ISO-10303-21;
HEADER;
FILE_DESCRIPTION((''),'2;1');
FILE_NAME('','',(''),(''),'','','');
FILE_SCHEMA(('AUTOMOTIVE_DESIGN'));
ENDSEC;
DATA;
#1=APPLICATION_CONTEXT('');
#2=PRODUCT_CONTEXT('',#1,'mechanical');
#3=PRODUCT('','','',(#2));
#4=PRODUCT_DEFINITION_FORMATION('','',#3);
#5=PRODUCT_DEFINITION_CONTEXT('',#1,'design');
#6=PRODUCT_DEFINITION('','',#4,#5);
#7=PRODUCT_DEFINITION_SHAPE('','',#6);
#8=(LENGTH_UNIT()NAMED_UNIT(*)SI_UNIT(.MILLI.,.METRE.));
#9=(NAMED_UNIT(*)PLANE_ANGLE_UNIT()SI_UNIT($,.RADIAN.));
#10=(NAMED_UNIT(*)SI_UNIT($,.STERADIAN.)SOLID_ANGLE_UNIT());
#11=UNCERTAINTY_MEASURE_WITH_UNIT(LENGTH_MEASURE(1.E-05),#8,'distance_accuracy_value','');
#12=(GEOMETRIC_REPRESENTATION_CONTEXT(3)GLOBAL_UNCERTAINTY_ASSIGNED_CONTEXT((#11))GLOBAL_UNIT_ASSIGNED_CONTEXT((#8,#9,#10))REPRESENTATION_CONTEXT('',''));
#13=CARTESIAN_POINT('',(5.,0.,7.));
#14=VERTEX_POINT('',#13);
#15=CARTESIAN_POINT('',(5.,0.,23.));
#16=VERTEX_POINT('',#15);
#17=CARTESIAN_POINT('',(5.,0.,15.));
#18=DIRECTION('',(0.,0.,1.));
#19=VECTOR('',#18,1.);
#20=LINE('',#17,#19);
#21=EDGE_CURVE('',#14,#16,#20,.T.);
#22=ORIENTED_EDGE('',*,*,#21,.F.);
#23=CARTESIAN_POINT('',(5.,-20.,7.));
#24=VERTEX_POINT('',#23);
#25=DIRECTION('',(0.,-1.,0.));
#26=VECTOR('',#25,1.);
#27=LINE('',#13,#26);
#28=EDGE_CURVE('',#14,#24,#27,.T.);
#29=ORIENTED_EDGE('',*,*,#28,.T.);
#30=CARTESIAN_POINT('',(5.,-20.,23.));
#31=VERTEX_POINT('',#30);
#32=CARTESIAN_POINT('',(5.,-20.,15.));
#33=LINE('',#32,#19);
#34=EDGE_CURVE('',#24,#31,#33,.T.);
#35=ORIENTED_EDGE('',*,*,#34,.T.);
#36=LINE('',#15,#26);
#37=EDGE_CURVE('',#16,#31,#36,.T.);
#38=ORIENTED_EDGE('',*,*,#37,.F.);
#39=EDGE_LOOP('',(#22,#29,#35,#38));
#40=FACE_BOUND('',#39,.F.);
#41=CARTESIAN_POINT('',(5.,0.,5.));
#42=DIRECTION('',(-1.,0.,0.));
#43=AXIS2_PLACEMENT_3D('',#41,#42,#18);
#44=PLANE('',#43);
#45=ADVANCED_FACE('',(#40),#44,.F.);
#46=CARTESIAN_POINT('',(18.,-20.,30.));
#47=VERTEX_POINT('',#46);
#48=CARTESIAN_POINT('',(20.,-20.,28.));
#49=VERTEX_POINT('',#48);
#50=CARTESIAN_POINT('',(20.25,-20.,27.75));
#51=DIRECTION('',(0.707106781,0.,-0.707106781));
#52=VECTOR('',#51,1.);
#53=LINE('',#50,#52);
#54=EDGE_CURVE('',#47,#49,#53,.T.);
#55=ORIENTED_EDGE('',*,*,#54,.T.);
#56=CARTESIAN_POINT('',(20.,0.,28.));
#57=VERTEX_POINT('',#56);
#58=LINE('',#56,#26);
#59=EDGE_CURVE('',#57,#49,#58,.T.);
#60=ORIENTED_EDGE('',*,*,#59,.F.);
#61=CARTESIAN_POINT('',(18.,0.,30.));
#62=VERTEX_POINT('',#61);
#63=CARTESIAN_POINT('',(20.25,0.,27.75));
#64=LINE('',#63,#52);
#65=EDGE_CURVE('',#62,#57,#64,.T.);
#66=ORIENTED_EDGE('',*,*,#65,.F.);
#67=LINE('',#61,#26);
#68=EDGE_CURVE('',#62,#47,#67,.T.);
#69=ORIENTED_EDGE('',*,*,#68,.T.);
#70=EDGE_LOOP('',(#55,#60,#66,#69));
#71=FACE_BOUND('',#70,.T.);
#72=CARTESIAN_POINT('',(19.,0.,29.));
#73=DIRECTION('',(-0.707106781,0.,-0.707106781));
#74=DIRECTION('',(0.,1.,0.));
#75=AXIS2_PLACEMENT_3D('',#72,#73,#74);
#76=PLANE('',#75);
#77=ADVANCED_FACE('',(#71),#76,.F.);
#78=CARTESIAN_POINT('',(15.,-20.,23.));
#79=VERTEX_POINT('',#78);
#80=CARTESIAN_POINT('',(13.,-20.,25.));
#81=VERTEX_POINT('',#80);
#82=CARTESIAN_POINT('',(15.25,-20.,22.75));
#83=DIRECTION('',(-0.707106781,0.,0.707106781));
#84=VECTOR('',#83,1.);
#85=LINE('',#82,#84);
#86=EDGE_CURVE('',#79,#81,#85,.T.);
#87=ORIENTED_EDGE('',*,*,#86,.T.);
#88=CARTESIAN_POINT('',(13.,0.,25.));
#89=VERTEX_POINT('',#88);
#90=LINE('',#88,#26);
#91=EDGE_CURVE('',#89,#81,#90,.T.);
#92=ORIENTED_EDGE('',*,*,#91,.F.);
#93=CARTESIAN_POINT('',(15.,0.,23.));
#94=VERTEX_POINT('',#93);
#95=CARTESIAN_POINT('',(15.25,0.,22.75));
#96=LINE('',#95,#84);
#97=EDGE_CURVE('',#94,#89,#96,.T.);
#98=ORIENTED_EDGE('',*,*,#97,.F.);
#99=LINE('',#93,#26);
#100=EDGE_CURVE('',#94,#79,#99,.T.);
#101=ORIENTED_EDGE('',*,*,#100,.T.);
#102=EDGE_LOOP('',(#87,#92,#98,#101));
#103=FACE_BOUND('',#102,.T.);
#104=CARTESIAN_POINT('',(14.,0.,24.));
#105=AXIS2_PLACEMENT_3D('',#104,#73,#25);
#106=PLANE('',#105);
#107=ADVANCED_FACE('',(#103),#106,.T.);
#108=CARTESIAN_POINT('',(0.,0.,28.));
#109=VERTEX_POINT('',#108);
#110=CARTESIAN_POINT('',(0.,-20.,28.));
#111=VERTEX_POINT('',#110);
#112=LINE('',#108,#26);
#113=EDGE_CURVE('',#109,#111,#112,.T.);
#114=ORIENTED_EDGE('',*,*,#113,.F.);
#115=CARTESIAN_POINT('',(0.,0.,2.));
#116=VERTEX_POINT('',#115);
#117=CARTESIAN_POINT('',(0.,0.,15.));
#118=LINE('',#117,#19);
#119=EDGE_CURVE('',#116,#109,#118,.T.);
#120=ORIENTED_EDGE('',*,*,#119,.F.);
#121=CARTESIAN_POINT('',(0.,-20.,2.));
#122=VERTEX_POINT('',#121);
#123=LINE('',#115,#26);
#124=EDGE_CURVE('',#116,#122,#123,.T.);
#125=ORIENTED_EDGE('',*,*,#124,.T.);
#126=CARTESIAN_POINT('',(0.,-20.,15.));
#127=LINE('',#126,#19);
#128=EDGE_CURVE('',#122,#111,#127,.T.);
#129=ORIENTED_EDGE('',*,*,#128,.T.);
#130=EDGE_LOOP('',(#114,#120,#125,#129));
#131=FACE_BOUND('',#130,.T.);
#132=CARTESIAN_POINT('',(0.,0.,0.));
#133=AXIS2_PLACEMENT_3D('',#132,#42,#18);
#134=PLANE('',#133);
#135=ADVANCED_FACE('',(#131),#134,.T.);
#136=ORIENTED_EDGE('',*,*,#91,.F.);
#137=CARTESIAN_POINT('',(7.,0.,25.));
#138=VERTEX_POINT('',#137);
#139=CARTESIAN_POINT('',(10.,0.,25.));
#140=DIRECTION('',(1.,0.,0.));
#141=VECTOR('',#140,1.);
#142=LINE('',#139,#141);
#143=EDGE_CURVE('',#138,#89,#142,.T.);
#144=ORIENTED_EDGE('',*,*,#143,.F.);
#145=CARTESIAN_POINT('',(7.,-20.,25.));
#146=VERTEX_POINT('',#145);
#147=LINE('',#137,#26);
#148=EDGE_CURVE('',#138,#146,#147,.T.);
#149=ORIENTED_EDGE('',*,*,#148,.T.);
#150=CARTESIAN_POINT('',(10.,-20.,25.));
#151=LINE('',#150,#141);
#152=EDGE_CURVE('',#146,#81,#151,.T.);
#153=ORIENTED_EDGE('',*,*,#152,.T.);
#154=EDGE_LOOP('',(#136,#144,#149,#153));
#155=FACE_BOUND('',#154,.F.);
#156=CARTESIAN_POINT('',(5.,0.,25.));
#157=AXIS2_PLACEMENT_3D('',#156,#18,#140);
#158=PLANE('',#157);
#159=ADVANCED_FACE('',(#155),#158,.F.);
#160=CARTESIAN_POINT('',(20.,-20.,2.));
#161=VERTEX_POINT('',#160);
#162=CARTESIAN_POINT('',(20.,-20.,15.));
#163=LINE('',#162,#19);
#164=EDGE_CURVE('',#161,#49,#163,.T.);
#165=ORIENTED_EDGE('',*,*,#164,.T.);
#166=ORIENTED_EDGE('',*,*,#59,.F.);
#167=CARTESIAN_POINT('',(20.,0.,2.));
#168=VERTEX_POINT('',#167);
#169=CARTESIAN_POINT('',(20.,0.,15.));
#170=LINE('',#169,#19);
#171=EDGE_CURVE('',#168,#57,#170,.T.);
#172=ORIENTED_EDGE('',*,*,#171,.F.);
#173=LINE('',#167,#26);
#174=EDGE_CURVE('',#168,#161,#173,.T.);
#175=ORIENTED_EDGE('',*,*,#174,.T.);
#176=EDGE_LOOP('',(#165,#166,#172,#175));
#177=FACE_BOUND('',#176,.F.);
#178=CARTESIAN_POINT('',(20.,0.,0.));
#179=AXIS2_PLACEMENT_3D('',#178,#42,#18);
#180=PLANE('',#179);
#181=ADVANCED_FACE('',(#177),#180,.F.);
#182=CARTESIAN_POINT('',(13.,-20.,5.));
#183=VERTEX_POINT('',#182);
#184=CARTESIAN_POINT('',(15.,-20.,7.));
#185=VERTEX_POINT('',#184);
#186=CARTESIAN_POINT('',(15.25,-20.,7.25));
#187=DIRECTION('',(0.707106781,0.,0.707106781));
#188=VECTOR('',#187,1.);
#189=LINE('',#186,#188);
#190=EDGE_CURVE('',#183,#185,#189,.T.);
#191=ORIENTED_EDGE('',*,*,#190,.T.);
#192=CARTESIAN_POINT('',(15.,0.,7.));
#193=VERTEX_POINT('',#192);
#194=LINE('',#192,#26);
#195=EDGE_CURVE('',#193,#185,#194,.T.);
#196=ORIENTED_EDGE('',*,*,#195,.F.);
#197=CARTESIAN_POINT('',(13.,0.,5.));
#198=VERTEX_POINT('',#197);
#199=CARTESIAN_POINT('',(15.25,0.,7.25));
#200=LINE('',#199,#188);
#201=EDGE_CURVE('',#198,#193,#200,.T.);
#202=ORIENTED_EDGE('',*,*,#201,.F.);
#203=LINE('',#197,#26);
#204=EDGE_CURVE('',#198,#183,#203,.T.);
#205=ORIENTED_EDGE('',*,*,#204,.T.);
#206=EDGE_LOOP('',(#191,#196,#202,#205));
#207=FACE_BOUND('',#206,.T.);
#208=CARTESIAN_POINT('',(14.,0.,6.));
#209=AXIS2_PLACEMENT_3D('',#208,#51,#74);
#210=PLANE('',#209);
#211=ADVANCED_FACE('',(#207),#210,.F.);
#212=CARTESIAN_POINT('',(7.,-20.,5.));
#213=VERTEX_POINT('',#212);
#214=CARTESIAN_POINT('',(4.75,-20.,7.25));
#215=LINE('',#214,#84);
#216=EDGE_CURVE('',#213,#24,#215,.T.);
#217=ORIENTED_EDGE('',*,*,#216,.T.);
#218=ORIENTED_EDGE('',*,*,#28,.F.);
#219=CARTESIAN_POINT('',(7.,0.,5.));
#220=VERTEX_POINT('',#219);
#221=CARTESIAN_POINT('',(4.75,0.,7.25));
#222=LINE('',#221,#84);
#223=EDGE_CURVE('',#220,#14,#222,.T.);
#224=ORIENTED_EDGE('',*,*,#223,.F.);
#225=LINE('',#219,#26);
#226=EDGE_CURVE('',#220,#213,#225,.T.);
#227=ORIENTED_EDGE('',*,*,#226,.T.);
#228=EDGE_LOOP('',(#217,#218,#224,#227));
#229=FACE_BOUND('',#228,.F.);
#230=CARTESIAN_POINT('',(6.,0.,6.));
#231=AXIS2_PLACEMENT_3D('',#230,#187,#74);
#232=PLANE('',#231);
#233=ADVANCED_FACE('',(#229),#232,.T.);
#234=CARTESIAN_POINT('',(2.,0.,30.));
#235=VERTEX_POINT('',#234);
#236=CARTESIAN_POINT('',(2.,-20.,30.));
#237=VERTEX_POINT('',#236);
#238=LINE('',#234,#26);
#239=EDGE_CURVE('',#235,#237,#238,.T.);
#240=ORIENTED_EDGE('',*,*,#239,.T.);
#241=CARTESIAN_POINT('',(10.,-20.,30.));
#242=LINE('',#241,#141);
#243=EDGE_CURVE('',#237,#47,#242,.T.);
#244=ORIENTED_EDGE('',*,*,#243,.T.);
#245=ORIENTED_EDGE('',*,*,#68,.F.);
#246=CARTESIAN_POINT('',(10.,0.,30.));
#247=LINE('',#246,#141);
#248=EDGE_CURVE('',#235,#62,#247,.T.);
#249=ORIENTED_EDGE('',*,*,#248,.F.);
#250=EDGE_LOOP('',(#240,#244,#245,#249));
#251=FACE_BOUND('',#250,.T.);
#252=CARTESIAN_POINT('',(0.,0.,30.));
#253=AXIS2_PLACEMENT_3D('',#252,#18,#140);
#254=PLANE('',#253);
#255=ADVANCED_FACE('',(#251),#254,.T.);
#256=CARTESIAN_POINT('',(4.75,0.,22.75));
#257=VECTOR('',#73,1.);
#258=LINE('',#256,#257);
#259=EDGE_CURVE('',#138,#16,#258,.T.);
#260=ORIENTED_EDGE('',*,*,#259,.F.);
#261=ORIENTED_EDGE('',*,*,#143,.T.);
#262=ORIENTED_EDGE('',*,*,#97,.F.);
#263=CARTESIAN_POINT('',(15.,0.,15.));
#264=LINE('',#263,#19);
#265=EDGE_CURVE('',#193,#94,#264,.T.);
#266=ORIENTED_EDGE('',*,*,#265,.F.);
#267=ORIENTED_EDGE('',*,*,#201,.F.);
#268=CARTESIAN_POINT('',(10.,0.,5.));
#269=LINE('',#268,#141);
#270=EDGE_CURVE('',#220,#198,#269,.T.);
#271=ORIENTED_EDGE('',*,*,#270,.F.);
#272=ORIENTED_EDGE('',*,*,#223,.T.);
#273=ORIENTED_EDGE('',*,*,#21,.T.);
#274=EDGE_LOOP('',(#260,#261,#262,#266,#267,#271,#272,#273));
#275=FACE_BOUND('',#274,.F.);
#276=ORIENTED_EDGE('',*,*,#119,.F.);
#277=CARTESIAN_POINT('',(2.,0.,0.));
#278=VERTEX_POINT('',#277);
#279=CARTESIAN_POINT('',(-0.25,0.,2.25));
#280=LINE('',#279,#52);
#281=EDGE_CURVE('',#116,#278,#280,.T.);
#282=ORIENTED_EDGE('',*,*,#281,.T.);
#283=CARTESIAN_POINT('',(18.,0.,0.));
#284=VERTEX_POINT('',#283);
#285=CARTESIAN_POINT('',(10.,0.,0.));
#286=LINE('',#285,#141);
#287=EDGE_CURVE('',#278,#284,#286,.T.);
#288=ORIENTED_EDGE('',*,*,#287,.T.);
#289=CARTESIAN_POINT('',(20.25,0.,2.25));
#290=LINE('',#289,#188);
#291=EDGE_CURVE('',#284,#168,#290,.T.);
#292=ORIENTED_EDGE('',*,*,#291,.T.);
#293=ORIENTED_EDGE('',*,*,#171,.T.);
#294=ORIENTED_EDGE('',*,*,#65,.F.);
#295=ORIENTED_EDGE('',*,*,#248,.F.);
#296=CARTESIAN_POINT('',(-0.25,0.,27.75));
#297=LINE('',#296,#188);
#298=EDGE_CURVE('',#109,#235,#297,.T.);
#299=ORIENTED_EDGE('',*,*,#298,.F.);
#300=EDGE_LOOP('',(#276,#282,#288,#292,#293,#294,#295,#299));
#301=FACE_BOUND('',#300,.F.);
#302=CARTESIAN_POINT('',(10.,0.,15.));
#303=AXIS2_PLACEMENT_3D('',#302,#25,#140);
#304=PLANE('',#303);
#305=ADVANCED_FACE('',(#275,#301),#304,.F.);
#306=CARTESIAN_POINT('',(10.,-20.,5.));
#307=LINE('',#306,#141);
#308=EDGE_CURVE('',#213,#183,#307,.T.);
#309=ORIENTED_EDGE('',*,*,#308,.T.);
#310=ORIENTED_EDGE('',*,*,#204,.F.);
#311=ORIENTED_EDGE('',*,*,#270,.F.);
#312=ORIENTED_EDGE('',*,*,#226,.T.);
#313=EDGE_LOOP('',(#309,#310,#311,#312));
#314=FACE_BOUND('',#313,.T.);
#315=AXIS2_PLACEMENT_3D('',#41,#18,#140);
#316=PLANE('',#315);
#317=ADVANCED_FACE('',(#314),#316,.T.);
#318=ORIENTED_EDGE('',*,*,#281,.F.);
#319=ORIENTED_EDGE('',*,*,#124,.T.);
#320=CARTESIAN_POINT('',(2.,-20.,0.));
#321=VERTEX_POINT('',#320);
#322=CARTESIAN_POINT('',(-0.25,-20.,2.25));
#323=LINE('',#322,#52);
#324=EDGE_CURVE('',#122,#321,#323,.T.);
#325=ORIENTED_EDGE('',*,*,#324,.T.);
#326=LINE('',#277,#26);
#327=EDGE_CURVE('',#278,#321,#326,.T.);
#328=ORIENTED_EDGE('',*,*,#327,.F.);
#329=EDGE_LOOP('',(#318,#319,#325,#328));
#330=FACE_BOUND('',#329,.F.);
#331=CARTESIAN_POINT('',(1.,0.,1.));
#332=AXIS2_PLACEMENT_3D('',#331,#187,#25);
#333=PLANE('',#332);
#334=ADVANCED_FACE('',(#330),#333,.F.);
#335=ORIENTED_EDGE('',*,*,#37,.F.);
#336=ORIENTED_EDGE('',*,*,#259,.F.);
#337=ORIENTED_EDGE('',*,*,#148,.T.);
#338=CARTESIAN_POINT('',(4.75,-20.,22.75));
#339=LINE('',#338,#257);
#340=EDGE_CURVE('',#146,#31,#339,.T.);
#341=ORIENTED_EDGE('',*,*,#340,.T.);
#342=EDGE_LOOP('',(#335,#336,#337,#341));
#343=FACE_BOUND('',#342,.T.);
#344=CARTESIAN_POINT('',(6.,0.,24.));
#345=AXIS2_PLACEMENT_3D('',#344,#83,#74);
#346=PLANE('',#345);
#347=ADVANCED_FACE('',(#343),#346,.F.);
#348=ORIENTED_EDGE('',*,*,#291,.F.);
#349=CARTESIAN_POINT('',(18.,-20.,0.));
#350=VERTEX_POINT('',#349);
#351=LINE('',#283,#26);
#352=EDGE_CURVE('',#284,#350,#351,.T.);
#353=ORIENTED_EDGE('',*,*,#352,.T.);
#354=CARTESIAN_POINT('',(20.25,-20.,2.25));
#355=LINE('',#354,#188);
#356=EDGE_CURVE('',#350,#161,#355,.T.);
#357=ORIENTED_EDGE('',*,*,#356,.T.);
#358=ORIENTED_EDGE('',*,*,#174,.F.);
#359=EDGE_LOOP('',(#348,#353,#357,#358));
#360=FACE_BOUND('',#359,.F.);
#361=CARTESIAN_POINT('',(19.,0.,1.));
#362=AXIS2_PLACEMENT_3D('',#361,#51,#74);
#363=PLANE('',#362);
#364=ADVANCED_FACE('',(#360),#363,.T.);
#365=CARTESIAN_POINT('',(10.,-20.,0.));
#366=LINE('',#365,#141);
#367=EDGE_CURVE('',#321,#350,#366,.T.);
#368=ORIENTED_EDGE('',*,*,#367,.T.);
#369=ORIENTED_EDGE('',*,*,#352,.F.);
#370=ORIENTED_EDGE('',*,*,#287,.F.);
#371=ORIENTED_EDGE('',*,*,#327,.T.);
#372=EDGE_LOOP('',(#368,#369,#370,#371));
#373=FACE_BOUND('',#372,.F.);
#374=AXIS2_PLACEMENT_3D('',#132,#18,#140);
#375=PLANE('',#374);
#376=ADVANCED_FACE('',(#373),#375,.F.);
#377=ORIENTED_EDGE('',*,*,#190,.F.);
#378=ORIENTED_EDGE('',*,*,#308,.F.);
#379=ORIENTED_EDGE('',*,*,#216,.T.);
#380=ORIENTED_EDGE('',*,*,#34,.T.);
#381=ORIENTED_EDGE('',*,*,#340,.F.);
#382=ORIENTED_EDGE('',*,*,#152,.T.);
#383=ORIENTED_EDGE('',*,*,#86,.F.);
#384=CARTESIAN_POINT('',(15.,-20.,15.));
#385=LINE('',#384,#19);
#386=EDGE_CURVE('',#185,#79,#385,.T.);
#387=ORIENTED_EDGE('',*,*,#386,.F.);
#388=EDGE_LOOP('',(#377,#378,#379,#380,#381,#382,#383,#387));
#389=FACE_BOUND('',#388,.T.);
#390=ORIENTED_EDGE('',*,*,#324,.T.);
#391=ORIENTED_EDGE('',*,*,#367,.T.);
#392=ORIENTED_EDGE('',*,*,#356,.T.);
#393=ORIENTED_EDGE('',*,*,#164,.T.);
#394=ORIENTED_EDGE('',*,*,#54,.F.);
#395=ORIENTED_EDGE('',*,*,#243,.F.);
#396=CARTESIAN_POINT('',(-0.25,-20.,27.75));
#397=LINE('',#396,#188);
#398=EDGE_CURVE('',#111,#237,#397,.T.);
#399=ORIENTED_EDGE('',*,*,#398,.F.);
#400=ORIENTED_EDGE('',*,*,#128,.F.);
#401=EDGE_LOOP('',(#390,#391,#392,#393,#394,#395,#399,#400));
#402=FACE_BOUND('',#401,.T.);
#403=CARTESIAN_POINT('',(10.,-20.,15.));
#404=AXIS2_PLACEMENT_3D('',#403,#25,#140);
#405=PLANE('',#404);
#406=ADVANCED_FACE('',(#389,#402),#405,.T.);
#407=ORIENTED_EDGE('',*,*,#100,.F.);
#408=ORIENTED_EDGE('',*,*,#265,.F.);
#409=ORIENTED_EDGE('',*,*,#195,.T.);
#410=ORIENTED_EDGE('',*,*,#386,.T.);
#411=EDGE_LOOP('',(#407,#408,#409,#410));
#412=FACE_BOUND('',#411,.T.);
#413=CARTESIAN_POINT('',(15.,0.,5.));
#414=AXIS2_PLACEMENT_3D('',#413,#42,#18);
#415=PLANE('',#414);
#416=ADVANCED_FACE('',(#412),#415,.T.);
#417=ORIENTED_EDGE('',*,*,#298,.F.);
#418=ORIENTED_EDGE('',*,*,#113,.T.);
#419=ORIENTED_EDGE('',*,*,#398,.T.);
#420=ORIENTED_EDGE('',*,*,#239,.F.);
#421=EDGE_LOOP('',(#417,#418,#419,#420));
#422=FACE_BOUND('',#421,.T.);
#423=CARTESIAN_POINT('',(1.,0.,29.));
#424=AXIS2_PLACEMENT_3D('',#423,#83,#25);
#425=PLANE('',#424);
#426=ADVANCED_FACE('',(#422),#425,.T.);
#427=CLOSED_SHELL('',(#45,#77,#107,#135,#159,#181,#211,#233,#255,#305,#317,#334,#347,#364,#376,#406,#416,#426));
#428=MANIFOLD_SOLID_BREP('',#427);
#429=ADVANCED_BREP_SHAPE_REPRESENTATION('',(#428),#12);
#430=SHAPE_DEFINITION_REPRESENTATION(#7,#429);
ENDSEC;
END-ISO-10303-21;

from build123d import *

# Parameters (mm, degrees)
F0_W     = 20
F0_H     = 30
F0_W_2   = 10
F0_H_2   = 20
F1_DEPTH = 20
F2_SIZE  = 2


with BuildPart() as f1:
    # F0 (on Front) → F1 (new body)
    with BuildSketch(Plane.XZ):
        with Locations((10, 15)):
            Rectangle(F0_W, F0_H)
        with Locations((10, 15)):
            Rectangle(F0_W_2, F0_H_2, mode=Mode.SUBTRACT)
    extrude(amount=F1_DEPTH)

    # F2
    f2_edges = [f1.edges().sort_by_distance(p)[0] for p in [
        (0, -10, 30),
        (0, -10, 0),
        (5, -10, 25),
        (5, -10, 5),
        (20, -10, 0),
        (20, -10, 30),
        (15, -10, 25),
        (15, -10, 5),
    ]]
    chamfer(f2_edges, length=F2_SIZE)


solid = f1.part
